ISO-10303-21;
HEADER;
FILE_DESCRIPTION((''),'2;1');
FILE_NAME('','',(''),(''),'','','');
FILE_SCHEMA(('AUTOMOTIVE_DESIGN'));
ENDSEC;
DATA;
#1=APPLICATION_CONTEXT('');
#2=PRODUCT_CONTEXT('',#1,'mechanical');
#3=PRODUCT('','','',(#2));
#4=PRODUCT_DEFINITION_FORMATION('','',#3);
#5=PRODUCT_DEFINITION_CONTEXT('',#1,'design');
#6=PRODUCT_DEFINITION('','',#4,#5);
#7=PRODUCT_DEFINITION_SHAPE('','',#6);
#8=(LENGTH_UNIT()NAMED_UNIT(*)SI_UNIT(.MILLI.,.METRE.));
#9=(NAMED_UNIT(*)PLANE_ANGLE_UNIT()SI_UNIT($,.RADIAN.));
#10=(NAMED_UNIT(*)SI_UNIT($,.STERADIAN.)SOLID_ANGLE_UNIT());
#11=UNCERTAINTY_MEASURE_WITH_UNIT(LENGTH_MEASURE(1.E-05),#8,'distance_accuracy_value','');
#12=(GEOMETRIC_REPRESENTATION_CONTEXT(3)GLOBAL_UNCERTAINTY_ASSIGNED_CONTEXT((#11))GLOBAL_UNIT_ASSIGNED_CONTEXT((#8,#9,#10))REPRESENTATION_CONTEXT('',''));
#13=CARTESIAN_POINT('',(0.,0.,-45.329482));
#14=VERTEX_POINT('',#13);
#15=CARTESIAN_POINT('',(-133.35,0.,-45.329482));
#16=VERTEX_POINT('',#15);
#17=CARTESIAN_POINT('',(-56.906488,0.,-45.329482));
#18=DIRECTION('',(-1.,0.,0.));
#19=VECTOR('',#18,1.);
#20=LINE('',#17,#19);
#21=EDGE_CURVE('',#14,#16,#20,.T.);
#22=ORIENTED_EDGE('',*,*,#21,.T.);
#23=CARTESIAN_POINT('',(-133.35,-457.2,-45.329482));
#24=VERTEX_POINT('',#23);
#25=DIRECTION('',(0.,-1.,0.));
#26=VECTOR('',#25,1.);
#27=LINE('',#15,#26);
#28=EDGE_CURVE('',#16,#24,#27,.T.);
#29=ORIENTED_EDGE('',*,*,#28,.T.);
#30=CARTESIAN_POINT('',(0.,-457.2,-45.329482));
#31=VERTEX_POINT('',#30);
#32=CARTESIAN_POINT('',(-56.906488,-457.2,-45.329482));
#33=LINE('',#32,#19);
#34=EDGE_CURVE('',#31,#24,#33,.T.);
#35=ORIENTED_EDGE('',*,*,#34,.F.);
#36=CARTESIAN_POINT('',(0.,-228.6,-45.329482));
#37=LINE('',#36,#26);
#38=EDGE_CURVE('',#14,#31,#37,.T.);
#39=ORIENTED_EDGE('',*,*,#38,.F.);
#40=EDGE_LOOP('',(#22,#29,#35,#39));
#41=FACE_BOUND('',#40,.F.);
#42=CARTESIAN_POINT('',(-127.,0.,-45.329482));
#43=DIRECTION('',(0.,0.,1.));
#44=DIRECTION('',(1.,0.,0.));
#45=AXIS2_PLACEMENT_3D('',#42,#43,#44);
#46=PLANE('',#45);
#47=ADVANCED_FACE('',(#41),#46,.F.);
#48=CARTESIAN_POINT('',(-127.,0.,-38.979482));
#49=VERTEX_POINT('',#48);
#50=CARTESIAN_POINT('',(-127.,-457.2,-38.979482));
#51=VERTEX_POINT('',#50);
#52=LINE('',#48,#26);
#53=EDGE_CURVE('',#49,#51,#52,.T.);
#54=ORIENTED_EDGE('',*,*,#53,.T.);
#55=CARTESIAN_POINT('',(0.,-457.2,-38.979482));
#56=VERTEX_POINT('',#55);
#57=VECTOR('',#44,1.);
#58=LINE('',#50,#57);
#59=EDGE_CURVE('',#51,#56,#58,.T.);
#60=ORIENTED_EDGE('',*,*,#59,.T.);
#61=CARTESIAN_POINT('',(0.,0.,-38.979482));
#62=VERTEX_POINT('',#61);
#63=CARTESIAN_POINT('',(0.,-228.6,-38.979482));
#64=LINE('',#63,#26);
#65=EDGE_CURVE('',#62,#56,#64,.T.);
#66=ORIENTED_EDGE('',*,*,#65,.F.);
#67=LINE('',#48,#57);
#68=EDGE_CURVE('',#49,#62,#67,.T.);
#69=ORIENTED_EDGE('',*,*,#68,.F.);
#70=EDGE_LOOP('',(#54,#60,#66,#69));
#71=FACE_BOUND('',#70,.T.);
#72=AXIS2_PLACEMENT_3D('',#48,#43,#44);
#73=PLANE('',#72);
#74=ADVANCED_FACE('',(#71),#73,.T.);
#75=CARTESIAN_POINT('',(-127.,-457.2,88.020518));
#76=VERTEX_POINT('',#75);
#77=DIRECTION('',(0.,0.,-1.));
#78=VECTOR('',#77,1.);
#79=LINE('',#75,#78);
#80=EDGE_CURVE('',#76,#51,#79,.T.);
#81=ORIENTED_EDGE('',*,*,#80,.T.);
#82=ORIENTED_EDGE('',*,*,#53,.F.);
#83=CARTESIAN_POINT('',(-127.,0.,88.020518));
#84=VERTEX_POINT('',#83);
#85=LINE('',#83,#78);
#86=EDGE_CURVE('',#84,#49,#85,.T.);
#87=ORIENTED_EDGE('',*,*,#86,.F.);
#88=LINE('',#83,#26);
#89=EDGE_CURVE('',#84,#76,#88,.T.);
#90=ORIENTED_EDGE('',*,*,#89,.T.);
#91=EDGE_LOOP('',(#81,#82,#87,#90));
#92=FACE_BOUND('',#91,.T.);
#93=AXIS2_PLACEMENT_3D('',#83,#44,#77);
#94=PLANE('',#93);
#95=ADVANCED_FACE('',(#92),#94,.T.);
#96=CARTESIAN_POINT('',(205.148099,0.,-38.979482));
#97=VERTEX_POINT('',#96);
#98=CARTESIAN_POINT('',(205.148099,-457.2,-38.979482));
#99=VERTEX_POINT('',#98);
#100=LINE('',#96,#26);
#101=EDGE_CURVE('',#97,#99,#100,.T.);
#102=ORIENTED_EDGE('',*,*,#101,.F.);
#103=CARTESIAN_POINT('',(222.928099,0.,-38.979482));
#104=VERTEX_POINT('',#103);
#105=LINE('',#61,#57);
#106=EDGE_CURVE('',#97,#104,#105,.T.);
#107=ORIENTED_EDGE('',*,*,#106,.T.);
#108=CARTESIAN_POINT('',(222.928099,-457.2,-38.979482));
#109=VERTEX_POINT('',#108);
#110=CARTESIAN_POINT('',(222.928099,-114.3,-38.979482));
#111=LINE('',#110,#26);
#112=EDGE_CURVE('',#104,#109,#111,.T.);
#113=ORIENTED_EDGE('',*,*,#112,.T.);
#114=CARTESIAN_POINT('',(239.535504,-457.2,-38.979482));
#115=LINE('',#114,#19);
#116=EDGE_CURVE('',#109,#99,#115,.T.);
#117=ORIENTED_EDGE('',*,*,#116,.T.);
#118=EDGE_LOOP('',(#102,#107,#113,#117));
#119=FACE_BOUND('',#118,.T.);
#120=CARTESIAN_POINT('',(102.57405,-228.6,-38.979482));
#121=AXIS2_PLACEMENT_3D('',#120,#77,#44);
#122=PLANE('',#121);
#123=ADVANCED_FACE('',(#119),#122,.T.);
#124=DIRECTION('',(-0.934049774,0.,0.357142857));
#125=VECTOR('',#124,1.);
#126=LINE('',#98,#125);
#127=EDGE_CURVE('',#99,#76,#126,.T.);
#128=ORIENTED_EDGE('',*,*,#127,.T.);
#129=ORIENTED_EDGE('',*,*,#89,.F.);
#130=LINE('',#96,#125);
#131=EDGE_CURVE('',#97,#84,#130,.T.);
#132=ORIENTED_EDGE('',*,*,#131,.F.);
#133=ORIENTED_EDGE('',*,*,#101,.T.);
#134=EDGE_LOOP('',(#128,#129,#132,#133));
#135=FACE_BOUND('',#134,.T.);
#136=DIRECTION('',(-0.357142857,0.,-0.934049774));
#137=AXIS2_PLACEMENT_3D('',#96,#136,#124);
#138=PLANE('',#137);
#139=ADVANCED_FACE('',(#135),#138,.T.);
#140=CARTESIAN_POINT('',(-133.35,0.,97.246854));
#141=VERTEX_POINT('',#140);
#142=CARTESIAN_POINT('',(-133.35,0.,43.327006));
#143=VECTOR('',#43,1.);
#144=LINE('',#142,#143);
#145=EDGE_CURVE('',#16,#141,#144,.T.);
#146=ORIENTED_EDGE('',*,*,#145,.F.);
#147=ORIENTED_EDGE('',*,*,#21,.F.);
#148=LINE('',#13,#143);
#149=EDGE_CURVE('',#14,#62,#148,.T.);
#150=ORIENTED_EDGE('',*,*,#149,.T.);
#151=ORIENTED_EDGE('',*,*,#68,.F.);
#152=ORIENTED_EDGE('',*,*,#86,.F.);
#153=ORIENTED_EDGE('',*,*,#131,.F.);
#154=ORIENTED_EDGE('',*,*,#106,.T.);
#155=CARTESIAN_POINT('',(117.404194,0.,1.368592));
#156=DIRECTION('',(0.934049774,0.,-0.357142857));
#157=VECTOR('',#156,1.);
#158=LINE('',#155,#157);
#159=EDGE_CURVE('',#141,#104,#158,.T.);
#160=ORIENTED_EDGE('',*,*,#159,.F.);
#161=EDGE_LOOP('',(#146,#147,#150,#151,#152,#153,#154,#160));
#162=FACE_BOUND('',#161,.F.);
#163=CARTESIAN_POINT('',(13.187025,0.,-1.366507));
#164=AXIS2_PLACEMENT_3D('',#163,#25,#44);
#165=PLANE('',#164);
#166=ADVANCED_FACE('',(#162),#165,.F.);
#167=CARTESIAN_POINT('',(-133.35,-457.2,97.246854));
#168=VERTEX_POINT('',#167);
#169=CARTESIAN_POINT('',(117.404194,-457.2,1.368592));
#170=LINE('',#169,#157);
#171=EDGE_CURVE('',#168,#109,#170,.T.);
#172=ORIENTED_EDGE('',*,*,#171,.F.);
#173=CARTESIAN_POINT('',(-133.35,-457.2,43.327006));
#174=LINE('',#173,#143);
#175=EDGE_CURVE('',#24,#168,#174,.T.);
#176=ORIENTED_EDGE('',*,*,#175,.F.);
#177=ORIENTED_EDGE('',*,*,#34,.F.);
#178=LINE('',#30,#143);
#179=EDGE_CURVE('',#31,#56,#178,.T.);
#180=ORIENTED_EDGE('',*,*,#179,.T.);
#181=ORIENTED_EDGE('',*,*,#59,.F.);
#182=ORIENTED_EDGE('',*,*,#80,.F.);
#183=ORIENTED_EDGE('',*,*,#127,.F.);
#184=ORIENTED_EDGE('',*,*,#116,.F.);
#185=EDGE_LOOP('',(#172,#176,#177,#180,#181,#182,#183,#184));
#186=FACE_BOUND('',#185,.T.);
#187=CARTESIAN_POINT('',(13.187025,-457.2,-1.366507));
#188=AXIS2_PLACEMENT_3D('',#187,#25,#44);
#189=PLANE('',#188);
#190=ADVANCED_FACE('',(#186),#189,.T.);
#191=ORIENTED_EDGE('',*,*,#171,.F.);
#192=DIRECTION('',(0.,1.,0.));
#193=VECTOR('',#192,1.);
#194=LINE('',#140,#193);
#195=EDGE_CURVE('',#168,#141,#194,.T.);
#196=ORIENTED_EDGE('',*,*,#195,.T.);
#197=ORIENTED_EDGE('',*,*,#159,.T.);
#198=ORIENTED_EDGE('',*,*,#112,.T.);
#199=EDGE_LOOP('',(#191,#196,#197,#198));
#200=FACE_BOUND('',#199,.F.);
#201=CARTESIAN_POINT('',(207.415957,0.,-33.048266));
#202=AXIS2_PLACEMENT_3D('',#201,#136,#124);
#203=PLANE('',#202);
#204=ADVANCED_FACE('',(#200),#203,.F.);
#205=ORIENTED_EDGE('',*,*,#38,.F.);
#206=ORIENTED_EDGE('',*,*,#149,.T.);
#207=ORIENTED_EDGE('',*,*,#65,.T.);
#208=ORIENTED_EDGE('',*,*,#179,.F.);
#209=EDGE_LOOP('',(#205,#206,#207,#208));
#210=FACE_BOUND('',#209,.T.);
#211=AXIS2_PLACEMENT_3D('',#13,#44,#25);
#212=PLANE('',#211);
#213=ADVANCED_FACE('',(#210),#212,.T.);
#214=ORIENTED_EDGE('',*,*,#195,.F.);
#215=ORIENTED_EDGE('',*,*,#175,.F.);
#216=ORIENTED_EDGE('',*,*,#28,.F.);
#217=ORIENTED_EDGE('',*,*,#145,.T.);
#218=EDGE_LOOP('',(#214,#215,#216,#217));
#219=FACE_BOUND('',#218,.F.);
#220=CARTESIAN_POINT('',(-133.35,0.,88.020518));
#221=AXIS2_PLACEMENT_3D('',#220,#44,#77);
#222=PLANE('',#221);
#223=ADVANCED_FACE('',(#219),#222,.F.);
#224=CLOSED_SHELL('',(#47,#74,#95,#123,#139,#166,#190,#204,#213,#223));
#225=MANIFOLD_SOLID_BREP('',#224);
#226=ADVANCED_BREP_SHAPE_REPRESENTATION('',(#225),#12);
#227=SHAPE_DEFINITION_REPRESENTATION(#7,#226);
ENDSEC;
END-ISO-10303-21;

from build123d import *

# Parameters (mm, degrees)
F1_DEPTH = 457.2
F2_T     = 6.35
F3_W     = 205.1480994978
F3_H     = 457.2
F3_W_2   = 34.3874049749
F4_DEPTH = 6.35


with BuildPart() as f1:
    # F0 (on Front) → F1 (new body)
    with BuildSketch(Plane.XZ):
        Polygon((-127, 88.0205180943), (-127, -38.9794819057), (205.1480994978, -38.9794819057), align=None)
    extrude(amount=F1_DEPTH)

    # F2
    f2_openings = [f1.faces().sort_by_distance(p)[0] for p in [
        (-16.283967, -457.2, 3.353851),
        (-16.283967, 0, 3.353851),
    ]]
    offset(amount=F2_T, openings=f2_openings, kind=Kind.INTERSECTION)

    # F3 (on face) → F4 (cut)
    with BuildSketch(Plane(origin=(0, 0, -45.3294819057), x_dir=(1, 0, 0), z_dir=(0, 0, -1))):
        with Locations((102.5740497489, 228.6)):
            Rectangle(F3_W, F3_H)
        with Locations((222.3418019852, 228.6)):
            Rectangle(F3_W_2, F3_H)
    extrude(amount=-F4_DEPTH, mode=Mode.SUBTRACT)


solid = f1.part
